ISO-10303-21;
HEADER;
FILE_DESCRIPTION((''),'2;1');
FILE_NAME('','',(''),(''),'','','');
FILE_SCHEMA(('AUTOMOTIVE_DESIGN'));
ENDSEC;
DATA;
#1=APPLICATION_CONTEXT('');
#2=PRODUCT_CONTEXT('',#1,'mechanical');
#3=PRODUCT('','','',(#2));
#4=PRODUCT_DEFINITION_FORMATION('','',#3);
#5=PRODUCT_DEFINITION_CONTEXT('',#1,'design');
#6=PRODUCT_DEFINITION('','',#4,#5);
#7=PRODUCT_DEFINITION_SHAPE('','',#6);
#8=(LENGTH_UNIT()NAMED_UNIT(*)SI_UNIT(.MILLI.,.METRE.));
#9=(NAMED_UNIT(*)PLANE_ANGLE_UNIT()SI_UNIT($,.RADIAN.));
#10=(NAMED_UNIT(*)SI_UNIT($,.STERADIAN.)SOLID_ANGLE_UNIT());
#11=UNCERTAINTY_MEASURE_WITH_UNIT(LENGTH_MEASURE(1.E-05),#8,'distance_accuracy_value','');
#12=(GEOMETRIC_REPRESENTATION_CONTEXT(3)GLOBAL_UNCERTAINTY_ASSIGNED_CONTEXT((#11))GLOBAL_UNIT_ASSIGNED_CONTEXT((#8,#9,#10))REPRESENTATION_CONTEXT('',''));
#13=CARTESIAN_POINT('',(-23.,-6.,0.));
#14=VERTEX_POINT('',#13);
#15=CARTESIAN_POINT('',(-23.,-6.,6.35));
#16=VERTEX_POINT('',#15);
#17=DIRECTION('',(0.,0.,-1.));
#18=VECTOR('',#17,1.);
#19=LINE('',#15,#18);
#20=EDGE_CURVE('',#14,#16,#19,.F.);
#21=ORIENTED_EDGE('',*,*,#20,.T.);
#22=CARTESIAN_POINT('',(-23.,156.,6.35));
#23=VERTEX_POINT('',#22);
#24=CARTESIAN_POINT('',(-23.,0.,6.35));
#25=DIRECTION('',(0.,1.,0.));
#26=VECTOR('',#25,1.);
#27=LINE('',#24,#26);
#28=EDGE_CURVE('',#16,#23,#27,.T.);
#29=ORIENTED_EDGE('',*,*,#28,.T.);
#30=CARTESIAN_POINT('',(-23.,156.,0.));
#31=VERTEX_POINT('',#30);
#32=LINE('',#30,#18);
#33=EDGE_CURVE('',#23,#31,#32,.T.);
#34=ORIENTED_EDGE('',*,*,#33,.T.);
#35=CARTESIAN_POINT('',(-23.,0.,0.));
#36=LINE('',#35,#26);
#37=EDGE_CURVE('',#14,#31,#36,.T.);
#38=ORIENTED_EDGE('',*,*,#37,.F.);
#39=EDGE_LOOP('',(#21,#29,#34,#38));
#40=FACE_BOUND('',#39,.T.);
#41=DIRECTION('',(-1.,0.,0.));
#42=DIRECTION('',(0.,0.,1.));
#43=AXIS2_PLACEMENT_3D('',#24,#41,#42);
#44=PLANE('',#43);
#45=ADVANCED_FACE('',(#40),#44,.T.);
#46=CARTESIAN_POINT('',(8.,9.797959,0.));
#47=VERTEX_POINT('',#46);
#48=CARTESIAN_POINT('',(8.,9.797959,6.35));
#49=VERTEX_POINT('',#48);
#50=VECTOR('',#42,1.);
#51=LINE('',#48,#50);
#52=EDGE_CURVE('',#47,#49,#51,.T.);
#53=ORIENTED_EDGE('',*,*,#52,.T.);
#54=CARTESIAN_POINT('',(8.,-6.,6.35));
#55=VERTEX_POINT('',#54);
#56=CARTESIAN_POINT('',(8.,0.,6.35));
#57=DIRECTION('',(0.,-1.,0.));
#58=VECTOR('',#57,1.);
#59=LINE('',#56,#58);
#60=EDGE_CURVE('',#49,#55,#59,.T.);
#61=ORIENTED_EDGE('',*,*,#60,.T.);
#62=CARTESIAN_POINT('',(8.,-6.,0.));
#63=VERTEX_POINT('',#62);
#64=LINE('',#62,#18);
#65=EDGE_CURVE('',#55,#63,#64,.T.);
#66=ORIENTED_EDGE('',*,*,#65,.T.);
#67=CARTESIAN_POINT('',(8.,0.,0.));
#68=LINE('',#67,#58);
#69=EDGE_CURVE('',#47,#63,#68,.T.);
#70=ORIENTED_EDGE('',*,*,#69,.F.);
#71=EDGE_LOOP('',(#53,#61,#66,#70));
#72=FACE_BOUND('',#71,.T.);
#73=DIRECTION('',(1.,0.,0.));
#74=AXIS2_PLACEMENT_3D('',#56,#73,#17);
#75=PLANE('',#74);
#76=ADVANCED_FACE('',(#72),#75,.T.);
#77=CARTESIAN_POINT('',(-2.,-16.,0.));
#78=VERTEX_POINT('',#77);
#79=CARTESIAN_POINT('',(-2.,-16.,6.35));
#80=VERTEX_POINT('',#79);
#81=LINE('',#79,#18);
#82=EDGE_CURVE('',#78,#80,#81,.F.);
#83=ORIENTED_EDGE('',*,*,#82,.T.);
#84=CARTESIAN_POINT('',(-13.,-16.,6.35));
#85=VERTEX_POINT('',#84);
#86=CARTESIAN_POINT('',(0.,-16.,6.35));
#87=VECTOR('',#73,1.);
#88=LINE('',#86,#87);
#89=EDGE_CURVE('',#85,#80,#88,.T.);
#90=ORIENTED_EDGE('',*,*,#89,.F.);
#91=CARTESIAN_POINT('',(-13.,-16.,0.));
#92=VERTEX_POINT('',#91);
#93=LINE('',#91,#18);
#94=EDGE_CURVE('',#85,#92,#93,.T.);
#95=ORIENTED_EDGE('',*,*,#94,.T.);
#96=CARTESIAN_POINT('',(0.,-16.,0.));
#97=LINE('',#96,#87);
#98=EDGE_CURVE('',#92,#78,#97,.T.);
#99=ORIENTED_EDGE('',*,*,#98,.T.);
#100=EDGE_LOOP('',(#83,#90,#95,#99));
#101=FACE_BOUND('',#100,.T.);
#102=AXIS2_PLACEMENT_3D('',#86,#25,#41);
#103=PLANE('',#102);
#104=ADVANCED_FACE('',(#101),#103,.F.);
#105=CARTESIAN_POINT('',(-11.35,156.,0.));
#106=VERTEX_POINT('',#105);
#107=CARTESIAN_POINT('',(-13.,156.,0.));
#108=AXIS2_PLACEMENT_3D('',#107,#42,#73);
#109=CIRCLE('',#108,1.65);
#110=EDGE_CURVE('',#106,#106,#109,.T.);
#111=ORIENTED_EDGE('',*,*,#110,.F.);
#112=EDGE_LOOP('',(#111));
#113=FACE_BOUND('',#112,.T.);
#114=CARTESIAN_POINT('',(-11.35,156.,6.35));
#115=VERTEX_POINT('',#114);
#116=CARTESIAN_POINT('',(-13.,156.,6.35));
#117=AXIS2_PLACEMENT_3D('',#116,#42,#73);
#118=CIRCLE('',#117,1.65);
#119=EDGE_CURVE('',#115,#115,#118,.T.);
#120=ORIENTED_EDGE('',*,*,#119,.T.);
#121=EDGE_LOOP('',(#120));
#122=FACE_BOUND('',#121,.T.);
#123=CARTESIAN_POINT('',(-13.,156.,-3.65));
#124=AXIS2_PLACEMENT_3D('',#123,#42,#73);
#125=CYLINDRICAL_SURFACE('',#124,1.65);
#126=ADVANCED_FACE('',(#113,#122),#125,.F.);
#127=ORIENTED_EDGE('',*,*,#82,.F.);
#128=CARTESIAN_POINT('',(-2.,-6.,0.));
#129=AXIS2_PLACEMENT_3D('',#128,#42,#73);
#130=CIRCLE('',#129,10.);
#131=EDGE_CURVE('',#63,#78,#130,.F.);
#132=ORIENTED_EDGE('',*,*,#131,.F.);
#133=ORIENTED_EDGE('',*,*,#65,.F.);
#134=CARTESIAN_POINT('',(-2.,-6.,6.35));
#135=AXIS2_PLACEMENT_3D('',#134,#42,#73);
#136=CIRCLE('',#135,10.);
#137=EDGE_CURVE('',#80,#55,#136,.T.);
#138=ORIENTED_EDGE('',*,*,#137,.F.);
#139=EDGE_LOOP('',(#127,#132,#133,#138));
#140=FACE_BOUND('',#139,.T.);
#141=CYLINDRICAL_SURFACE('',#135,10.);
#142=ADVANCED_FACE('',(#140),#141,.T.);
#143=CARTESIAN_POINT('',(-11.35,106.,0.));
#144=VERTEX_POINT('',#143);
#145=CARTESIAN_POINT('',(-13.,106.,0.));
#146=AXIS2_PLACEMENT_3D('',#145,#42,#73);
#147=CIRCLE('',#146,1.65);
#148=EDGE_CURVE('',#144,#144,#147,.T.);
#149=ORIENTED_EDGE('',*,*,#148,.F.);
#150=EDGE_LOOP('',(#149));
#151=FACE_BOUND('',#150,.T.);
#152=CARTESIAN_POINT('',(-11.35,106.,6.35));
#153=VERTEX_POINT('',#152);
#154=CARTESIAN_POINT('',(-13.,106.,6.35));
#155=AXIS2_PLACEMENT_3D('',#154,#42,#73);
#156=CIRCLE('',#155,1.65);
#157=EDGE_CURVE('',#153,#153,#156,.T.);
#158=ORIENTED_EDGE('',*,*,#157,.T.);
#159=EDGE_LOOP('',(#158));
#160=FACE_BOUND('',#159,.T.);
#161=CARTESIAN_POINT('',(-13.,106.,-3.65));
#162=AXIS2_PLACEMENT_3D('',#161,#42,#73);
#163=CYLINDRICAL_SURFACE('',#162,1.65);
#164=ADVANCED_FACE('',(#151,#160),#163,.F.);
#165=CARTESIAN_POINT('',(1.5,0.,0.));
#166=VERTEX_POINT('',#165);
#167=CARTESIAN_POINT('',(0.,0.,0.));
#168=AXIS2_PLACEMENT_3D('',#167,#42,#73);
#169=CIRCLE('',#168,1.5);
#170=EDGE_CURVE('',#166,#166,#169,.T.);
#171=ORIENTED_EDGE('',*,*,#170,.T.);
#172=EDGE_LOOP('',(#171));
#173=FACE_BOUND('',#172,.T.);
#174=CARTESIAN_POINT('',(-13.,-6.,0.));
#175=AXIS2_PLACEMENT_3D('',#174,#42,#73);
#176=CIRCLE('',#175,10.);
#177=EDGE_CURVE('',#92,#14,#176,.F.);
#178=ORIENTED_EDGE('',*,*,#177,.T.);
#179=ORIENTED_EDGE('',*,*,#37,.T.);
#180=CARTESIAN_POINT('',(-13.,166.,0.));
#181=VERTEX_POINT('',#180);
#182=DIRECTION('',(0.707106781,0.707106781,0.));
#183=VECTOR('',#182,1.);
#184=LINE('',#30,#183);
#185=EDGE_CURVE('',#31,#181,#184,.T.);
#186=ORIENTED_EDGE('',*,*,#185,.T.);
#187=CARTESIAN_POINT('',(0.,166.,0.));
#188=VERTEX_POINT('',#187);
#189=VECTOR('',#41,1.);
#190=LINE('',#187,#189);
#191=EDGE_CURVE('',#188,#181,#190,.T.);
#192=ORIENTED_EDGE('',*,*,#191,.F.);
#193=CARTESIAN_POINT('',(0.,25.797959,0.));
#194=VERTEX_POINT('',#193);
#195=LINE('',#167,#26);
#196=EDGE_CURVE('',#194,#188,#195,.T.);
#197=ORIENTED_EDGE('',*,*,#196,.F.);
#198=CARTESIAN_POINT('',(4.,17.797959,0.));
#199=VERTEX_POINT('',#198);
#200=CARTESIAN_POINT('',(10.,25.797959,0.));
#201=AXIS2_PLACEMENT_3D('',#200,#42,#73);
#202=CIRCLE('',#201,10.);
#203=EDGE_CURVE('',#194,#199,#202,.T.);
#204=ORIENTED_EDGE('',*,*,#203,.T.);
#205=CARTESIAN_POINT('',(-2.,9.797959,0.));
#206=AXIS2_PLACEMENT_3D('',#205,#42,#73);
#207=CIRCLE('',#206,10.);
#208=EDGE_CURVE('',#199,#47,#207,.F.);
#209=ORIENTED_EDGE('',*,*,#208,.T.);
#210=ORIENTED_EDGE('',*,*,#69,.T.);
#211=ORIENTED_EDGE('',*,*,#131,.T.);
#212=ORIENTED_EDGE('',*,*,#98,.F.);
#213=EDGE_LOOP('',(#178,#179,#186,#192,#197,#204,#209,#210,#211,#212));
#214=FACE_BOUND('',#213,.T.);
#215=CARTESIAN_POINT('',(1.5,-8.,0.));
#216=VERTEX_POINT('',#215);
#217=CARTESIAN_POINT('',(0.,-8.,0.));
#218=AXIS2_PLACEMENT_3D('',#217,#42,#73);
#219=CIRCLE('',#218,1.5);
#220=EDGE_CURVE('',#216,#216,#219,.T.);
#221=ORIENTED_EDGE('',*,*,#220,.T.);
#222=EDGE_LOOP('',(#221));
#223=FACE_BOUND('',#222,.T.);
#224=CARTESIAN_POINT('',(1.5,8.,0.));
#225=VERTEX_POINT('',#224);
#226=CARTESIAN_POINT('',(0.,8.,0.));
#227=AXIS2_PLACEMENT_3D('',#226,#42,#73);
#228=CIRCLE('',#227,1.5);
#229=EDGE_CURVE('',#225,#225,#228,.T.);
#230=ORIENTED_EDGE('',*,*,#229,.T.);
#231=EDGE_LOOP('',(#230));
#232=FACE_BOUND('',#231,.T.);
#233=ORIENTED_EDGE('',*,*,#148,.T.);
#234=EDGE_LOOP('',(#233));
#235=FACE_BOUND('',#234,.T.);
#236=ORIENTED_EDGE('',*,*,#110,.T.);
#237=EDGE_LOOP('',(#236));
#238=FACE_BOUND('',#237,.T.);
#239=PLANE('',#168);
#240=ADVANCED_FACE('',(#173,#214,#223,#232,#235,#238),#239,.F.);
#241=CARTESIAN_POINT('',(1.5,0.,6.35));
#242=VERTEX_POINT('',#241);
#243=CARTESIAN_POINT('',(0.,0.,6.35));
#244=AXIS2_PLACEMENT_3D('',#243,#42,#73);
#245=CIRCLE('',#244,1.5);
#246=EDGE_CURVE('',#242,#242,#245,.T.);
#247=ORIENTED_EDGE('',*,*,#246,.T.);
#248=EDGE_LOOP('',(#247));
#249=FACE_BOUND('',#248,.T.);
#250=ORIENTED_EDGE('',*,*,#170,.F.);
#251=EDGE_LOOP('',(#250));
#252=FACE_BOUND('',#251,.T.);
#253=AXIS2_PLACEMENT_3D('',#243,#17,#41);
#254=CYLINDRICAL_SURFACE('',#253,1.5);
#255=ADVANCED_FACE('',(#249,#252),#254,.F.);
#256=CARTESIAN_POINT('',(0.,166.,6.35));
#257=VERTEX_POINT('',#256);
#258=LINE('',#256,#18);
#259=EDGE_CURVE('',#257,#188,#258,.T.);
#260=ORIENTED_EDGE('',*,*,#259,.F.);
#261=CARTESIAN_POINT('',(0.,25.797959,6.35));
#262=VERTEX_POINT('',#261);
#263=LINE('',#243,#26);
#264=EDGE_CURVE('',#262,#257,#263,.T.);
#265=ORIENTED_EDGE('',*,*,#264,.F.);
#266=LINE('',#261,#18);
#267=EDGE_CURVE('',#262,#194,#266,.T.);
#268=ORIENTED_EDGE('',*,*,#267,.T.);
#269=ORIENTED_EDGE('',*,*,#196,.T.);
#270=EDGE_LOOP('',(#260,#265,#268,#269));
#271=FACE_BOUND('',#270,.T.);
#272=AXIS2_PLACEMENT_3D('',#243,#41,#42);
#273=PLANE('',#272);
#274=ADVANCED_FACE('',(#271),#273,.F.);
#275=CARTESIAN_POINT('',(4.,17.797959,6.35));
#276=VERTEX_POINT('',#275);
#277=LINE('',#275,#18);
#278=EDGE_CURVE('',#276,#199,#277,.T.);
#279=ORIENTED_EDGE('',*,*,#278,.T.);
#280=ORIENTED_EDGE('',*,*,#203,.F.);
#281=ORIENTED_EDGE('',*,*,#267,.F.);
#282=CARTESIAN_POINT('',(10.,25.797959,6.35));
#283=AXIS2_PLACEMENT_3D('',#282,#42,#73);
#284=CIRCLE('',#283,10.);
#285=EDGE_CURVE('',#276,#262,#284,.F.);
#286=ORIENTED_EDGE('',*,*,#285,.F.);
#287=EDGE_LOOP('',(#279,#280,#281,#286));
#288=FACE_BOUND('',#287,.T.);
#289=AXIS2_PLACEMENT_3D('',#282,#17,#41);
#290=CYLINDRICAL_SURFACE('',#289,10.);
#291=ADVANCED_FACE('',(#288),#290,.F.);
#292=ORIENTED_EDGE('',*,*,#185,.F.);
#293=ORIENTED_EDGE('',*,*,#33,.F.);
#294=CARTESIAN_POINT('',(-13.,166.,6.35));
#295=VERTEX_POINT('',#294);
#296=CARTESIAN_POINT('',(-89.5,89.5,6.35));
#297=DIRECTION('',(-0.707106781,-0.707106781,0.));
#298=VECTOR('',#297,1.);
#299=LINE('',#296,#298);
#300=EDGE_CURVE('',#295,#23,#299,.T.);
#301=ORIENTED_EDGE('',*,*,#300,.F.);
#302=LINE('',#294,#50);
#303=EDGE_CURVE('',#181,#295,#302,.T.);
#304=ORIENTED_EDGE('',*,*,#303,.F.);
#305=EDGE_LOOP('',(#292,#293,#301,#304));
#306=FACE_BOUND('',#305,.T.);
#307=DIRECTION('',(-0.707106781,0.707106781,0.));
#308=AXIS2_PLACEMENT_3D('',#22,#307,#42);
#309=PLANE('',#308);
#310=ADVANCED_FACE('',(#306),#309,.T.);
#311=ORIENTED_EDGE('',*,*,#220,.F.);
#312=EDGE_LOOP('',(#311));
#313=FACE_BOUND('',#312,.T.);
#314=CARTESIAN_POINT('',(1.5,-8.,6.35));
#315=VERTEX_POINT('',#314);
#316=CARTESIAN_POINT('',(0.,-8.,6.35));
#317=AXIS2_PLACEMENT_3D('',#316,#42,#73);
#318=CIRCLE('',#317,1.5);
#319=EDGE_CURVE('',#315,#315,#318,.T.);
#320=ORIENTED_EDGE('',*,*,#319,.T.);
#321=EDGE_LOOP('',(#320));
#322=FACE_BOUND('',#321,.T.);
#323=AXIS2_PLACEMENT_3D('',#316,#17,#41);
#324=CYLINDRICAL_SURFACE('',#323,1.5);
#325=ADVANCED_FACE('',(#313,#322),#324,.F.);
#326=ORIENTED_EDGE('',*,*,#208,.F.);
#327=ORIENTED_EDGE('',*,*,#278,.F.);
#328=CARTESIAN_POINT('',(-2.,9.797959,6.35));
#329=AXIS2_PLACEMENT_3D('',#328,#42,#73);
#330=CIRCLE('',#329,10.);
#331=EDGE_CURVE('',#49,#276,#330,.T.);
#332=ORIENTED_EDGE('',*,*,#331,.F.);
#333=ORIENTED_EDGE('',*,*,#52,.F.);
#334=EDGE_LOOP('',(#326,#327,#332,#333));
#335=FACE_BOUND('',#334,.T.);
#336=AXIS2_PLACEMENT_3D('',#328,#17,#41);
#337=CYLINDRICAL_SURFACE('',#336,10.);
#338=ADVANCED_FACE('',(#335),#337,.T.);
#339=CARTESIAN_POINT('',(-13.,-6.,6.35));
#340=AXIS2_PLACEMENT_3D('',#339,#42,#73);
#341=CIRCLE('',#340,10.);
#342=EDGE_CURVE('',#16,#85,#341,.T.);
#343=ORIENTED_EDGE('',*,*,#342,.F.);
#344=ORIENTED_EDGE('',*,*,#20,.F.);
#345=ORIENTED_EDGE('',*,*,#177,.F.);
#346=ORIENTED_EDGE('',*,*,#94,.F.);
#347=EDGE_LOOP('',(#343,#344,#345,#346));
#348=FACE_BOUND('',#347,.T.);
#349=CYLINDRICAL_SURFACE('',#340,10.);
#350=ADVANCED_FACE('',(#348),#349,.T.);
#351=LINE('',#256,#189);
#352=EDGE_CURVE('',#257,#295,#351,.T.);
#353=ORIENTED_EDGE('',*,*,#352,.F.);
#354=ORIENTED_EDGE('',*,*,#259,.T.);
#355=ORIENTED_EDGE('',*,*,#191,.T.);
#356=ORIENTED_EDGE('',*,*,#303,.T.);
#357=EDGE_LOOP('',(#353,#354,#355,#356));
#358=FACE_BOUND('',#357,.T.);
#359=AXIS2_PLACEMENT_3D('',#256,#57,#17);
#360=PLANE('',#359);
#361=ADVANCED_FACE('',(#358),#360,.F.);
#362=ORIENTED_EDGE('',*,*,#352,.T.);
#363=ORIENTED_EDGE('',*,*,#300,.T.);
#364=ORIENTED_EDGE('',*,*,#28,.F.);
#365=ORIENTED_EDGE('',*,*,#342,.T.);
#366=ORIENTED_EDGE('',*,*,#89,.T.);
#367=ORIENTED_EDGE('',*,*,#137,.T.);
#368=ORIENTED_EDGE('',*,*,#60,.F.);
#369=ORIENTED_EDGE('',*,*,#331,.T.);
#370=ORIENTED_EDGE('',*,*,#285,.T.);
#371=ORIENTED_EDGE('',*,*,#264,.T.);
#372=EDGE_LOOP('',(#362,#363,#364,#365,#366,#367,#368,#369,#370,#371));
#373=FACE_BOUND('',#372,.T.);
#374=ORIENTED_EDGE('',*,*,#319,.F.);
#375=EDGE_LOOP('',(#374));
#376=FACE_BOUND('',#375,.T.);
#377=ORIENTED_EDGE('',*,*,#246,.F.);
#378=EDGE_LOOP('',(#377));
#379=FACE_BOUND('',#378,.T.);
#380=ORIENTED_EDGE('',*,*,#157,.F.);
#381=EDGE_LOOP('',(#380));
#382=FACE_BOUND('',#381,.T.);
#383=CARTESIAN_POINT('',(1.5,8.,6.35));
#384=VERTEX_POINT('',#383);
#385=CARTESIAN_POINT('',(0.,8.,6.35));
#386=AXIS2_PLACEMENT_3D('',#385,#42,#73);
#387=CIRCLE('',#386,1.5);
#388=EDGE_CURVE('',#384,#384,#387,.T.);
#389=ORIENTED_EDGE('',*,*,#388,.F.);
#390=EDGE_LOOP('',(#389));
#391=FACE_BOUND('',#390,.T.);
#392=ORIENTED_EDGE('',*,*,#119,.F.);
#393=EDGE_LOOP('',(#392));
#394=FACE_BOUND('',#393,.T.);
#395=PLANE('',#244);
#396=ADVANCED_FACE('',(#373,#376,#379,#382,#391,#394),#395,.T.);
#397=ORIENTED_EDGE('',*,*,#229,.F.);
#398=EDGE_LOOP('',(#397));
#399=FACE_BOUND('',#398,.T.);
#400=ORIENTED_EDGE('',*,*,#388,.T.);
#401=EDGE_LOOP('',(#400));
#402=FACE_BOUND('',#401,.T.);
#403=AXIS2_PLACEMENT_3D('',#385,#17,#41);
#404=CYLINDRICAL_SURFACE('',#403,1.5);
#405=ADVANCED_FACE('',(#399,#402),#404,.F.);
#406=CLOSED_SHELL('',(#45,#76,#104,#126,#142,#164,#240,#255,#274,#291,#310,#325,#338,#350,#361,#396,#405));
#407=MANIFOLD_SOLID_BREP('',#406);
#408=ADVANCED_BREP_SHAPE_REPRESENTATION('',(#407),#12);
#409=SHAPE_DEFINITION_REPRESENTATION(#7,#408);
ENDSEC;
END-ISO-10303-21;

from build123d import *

# Parameters (mm, degrees)
SKETCH1_W           = 16
SKETCH1_H           = 32
SKETCH1_R           = 1.5
SKETCH1_W_2         = 8
SKETCH1_H_2         = 150
BOSS_EXTRUDE1_DEPTH = 6.35
FILLET1_R           = 10
FILLET2_R           = 10
CHAMFER1_SIZE       = 10
SKETCH2_R           = 1.65
CUT_EXTRUDE1_DEPTH  = 10


with BuildPart() as part:
    # Sketch1 → Boss-Extrude1 (new body)
    # profile 1 of 3: a face of its own
    with BuildSketch(Plane.XY):
        Rectangle(SKETCH1_W, SKETCH1_H)
        with Locations((0, -8)):
            Circle(SKETCH1_R, mode=Mode.SUBTRACT)
        with Locations((0, 8)):
            Circle(SKETCH1_R, mode=Mode.SUBTRACT)
        Circle(SKETCH1_R, mode=Mode.SUBTRACT)
    # profile 2 of 3: a face of its own
    with BuildSketch(Plane.XY):
        with Locations((-4, 91)):
            Rectangle(SKETCH1_W_2, SKETCH1_H_2)
    # profile 3 of 3: a face of its own
    with BuildSketch(Plane.XY):
        Polygon((-23, -16), (-23, 166), (-8, 166), (-8, 16), (-8, -16), align=None)
    extrude(amount=BOSS_EXTRUDE1_DEPTH)

    # Fillet1
    # the kernel refuses this fillet: 10 mm, written as the material it adds along each edge
    with BuildSketch(Plane(origin=(0, 16, 0), x_dir=(0, 1, 0), z_dir=(0, 0, 1))) as fillet1_piece_1:
        with BuildLine():
            CenterArc((9.797958971, -10), FILLET1_R, 90, 78.463040967)
            Line((0, -8), (0, 0))
            Line((0, 0), (9.797958971, 0))
        make_face()
    extrude(amount=6.35)
    # the kernel refuses this fillet: 10 mm, written as the material it takes off along each edge
    with BuildSketch(Plane(origin=(8, -16, -25), x_dir=(0, 1, 0), z_dir=(0, 0, 1)), Plane(origin=(-23, -16, -25), x_dir=(1, 0, 0), z_dir=(0, 0, 1))) as fillet1_2_piece_1:
        with BuildLine():
            CenterArc((FILLET1_R, FILLET1_R), FILLET1_R, 180, 90)
            Line((0, FILLET1_R), (0, 0))
            Line((0, 0), (FILLET1_R, 0))
        make_face()
    extrude(amount=56.35, mode=Mode.SUBTRACT)

    # Fillet2
    fillet2_edges = [part.edges().sort_by_distance(p)[0] for p in [
        (8, 16, 3.175),
    ]]
    fillet(fillet2_edges, radius=FILLET2_R)

    # Chamfer1
    chamfer1_edges = [part.edges().sort_by_distance(p)[0] for p in [
        (-23, 166, 3.175),
    ]]
    chamfer(chamfer1_edges, length=CHAMFER1_SIZE)

    # Sketch2 → Cut-Extrude1 (cut)
    with BuildSketch(Plane.XY.offset(6.35)):
        with Locations((-13, 156)):
            Circle(SKETCH2_R)
        with Locations((-13, 106)):
            Circle(SKETCH2_R)
    extrude(amount=-CUT_EXTRUDE1_DEPTH, mode=Mode.SUBTRACT)


solid = part.part
